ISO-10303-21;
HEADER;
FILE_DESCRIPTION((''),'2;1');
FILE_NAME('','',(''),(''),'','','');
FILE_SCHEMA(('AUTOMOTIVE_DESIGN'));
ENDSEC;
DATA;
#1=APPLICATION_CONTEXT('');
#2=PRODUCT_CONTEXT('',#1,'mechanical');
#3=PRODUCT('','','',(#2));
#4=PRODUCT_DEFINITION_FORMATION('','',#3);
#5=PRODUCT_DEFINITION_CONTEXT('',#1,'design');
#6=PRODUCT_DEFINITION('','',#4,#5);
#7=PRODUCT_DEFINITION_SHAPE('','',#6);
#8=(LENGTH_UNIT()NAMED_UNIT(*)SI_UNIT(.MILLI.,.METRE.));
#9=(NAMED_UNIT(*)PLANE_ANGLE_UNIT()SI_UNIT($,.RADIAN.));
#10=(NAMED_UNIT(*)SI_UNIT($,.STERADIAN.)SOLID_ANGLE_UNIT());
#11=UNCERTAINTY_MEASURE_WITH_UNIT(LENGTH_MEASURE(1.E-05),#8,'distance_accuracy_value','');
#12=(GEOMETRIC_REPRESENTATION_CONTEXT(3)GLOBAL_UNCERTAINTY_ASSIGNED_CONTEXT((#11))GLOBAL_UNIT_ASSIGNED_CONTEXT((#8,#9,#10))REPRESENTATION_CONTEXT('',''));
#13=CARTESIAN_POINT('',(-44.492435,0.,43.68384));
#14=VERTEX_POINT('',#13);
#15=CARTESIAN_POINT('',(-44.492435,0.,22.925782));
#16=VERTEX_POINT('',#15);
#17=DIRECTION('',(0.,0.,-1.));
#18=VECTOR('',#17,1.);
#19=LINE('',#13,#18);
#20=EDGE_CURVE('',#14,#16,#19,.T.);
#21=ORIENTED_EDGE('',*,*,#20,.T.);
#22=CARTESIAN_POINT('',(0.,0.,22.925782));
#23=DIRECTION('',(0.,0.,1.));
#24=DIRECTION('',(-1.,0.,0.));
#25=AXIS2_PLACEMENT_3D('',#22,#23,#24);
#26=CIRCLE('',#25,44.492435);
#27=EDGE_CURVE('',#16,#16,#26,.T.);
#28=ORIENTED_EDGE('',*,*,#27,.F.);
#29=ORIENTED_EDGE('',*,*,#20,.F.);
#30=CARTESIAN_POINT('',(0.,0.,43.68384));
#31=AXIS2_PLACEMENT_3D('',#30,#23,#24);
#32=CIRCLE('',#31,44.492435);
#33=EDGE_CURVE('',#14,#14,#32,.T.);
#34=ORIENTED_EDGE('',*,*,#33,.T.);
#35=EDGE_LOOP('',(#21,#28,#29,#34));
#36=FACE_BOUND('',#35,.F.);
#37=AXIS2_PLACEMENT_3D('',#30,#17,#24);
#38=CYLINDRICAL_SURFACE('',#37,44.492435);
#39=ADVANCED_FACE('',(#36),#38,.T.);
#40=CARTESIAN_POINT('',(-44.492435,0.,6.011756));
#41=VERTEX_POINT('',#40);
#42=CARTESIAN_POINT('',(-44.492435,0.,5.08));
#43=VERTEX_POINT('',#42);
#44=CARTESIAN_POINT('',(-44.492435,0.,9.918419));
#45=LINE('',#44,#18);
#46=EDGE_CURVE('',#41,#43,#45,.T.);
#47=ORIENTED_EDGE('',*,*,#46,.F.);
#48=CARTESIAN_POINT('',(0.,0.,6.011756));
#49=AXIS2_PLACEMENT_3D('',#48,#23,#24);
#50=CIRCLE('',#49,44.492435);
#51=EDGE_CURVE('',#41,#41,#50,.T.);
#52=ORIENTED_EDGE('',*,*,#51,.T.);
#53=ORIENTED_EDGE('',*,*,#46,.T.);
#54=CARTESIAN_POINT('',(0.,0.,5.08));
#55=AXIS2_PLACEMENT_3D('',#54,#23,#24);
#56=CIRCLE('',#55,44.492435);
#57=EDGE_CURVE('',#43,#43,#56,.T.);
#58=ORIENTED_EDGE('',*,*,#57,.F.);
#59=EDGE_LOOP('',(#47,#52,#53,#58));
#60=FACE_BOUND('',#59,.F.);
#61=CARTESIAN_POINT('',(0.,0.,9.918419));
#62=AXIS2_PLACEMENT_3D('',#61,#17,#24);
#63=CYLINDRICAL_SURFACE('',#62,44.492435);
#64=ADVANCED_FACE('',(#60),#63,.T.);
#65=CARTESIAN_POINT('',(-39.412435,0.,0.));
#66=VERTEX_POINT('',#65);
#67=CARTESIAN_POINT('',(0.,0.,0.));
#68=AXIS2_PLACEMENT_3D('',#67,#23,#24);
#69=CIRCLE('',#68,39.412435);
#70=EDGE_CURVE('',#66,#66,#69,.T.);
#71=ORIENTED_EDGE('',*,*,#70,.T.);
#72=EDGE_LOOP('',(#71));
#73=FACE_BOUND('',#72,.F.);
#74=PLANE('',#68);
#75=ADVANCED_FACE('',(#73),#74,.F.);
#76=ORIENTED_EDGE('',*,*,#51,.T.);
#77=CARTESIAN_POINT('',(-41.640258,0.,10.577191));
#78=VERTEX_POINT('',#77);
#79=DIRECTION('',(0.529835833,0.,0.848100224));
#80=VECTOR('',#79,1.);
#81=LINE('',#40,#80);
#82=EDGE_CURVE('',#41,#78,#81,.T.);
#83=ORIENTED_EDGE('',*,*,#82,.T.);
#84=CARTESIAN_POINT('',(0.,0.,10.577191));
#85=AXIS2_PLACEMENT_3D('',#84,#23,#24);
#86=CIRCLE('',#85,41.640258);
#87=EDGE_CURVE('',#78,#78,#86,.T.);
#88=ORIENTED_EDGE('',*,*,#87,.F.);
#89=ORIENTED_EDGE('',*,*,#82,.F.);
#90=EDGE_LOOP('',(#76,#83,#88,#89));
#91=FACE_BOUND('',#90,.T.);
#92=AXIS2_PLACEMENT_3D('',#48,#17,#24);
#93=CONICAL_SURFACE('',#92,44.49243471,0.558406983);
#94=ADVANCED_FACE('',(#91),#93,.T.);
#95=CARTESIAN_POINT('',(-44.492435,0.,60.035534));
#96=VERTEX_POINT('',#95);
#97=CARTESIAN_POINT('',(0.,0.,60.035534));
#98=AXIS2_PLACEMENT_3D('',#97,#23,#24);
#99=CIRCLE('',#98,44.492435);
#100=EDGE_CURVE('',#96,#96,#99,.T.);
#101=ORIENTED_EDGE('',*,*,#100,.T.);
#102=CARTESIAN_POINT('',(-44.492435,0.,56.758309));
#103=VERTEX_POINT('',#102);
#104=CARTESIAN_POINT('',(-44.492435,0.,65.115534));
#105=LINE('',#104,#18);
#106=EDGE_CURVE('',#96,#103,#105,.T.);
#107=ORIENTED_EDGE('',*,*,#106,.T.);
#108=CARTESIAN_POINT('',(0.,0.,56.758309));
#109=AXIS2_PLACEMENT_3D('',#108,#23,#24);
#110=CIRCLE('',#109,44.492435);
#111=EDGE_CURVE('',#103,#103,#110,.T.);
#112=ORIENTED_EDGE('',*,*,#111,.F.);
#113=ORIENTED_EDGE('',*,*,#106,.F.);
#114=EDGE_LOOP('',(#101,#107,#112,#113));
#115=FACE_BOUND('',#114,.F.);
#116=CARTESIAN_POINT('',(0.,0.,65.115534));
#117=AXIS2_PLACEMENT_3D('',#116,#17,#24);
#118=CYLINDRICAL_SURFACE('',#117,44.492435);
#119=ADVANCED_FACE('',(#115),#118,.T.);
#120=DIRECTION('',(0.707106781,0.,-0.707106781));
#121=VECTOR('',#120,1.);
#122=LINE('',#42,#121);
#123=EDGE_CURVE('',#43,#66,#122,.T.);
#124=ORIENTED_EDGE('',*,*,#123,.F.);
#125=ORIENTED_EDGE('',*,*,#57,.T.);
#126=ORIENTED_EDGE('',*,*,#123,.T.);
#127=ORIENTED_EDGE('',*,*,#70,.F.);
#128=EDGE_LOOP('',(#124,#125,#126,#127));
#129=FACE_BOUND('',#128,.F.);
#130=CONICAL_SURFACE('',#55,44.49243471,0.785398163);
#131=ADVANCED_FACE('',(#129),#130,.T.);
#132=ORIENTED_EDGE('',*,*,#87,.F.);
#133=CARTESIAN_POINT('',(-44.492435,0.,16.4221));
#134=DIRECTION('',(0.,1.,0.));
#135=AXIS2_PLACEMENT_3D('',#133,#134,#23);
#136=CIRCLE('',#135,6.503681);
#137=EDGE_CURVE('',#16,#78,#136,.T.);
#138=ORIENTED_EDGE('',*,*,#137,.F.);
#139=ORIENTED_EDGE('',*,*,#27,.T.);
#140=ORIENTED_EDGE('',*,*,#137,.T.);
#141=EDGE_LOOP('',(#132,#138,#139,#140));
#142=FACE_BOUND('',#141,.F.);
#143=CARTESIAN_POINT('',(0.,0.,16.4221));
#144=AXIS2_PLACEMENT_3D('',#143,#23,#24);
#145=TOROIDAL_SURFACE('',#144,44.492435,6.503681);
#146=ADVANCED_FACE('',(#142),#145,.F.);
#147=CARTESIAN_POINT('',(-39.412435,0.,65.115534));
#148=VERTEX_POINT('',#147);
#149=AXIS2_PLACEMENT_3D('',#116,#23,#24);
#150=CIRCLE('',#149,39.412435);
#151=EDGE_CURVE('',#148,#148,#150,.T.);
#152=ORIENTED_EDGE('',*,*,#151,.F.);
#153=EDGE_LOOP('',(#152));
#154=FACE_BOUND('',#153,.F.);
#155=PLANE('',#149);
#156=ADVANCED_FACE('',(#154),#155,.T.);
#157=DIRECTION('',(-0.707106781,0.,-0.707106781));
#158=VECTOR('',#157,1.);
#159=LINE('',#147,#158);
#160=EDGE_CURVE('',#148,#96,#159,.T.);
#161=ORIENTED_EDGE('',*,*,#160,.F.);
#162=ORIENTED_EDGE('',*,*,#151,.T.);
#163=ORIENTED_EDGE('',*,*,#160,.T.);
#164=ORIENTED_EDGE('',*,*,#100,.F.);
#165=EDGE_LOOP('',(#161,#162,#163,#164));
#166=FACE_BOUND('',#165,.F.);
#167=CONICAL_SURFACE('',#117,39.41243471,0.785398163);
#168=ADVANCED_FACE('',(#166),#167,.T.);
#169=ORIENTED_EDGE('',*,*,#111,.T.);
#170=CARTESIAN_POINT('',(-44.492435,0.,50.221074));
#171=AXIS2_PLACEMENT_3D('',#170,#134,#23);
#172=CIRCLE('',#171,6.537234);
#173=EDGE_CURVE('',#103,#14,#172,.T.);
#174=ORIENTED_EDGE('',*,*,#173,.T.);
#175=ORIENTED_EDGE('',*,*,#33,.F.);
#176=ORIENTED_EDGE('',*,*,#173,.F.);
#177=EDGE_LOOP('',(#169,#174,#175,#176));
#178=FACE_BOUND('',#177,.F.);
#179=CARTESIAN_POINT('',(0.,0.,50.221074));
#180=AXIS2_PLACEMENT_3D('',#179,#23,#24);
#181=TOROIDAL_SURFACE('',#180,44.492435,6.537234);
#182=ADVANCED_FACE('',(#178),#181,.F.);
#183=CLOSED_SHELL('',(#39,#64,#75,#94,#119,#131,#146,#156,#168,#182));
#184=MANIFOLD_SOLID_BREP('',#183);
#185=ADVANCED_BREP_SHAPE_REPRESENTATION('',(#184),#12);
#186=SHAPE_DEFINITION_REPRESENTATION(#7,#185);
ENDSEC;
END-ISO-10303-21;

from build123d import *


# Not quite as in the source:
# - a fillet or chamfer that OpenCascade refuses, or shapes differently, is made with other operations: its cross-section is extruded or revolved along the edge and cut away or added


with BuildPart() as f1:
    # F0 (on Front) → F1 (revolve)
    with BuildSketch(Plane.XZ):
        with BuildLine():
            Line((-44.4924347103, 0), (0, 0))
            Line((0, 0), (0, 65.1155337691))
            Line((0, 65.1155337691), (-44.4924347103, 65.1155337691))
            Line((-44.4924347103, 65.1155337691), (-44.4924347103, 56.7583087614))
            ThreePointArc((-44.4924347103, 56.7583087614), (-37.9552003214, 50.2210743725), (-44.4924347103, 43.6838399837))
            Line((-44.4924347103, 43.6838399837), (-44.4924347103, 22.9257815758))
            ThreePointArc((-44.4924347103, 22.9257815758), (-37.9887534996, 16.4221003652), (-44.4924347103, 9.9184191545))
            Line((-44.4924347103, 9.9184191545), (-44.4924347103, 0))
        make_face()
    revolve(axis=Axis((0, 0, 32.5577668846), (0, 0, 1)))

    # F2: chamfer of 5.08 on 4 edges, made by hand

    # F2_s1 → F2_t2 (revolve, cut)
    with BuildSketch(Plane.XZ):
        Polygon((-39.4124347103, 65.1155337691), (-44.4924347103, 60.0355337691), (-44.4924347103, 65.1155337691), align=None)
    revolve(axis=Axis((0, 0, 65.1155337691), (0, 0, 1)), mode=Mode.SUBTRACT)

    # F2_s3 → F2_t4 (revolve, cut)
    with BuildSketch(Plane.XZ):
        with BuildLine():
            Line((-44.4924347103, 6.0117559717), (-41.6402584505, 10.5771914803))
            ThreePointArc((-41.6402584505, 10.5771914803), (-42.9562364784, 10.1024513019), (-44.4924347103, 9.9184191545))
            Line((-44.4924347103, 9.9184191545), (-44.4924347103, 6.0117559717))
        make_face()
    revolve(axis=Axis((0, 0, 9.9184191545), (0, 0, 1)), mode=Mode.SUBTRACT)

    # F2_s5 → F2_t6 (revolve, cut)
    with BuildSketch(Plane.XZ):
        Polygon((-44.4924347103, 5.08), (-39.4124347103, 0), (-44.4924347103, 0), align=None)
    revolve(axis=Axis((0, 0, 0), (0, 0, 1)), mode=Mode.SUBTRACT)


solid = f1.part
